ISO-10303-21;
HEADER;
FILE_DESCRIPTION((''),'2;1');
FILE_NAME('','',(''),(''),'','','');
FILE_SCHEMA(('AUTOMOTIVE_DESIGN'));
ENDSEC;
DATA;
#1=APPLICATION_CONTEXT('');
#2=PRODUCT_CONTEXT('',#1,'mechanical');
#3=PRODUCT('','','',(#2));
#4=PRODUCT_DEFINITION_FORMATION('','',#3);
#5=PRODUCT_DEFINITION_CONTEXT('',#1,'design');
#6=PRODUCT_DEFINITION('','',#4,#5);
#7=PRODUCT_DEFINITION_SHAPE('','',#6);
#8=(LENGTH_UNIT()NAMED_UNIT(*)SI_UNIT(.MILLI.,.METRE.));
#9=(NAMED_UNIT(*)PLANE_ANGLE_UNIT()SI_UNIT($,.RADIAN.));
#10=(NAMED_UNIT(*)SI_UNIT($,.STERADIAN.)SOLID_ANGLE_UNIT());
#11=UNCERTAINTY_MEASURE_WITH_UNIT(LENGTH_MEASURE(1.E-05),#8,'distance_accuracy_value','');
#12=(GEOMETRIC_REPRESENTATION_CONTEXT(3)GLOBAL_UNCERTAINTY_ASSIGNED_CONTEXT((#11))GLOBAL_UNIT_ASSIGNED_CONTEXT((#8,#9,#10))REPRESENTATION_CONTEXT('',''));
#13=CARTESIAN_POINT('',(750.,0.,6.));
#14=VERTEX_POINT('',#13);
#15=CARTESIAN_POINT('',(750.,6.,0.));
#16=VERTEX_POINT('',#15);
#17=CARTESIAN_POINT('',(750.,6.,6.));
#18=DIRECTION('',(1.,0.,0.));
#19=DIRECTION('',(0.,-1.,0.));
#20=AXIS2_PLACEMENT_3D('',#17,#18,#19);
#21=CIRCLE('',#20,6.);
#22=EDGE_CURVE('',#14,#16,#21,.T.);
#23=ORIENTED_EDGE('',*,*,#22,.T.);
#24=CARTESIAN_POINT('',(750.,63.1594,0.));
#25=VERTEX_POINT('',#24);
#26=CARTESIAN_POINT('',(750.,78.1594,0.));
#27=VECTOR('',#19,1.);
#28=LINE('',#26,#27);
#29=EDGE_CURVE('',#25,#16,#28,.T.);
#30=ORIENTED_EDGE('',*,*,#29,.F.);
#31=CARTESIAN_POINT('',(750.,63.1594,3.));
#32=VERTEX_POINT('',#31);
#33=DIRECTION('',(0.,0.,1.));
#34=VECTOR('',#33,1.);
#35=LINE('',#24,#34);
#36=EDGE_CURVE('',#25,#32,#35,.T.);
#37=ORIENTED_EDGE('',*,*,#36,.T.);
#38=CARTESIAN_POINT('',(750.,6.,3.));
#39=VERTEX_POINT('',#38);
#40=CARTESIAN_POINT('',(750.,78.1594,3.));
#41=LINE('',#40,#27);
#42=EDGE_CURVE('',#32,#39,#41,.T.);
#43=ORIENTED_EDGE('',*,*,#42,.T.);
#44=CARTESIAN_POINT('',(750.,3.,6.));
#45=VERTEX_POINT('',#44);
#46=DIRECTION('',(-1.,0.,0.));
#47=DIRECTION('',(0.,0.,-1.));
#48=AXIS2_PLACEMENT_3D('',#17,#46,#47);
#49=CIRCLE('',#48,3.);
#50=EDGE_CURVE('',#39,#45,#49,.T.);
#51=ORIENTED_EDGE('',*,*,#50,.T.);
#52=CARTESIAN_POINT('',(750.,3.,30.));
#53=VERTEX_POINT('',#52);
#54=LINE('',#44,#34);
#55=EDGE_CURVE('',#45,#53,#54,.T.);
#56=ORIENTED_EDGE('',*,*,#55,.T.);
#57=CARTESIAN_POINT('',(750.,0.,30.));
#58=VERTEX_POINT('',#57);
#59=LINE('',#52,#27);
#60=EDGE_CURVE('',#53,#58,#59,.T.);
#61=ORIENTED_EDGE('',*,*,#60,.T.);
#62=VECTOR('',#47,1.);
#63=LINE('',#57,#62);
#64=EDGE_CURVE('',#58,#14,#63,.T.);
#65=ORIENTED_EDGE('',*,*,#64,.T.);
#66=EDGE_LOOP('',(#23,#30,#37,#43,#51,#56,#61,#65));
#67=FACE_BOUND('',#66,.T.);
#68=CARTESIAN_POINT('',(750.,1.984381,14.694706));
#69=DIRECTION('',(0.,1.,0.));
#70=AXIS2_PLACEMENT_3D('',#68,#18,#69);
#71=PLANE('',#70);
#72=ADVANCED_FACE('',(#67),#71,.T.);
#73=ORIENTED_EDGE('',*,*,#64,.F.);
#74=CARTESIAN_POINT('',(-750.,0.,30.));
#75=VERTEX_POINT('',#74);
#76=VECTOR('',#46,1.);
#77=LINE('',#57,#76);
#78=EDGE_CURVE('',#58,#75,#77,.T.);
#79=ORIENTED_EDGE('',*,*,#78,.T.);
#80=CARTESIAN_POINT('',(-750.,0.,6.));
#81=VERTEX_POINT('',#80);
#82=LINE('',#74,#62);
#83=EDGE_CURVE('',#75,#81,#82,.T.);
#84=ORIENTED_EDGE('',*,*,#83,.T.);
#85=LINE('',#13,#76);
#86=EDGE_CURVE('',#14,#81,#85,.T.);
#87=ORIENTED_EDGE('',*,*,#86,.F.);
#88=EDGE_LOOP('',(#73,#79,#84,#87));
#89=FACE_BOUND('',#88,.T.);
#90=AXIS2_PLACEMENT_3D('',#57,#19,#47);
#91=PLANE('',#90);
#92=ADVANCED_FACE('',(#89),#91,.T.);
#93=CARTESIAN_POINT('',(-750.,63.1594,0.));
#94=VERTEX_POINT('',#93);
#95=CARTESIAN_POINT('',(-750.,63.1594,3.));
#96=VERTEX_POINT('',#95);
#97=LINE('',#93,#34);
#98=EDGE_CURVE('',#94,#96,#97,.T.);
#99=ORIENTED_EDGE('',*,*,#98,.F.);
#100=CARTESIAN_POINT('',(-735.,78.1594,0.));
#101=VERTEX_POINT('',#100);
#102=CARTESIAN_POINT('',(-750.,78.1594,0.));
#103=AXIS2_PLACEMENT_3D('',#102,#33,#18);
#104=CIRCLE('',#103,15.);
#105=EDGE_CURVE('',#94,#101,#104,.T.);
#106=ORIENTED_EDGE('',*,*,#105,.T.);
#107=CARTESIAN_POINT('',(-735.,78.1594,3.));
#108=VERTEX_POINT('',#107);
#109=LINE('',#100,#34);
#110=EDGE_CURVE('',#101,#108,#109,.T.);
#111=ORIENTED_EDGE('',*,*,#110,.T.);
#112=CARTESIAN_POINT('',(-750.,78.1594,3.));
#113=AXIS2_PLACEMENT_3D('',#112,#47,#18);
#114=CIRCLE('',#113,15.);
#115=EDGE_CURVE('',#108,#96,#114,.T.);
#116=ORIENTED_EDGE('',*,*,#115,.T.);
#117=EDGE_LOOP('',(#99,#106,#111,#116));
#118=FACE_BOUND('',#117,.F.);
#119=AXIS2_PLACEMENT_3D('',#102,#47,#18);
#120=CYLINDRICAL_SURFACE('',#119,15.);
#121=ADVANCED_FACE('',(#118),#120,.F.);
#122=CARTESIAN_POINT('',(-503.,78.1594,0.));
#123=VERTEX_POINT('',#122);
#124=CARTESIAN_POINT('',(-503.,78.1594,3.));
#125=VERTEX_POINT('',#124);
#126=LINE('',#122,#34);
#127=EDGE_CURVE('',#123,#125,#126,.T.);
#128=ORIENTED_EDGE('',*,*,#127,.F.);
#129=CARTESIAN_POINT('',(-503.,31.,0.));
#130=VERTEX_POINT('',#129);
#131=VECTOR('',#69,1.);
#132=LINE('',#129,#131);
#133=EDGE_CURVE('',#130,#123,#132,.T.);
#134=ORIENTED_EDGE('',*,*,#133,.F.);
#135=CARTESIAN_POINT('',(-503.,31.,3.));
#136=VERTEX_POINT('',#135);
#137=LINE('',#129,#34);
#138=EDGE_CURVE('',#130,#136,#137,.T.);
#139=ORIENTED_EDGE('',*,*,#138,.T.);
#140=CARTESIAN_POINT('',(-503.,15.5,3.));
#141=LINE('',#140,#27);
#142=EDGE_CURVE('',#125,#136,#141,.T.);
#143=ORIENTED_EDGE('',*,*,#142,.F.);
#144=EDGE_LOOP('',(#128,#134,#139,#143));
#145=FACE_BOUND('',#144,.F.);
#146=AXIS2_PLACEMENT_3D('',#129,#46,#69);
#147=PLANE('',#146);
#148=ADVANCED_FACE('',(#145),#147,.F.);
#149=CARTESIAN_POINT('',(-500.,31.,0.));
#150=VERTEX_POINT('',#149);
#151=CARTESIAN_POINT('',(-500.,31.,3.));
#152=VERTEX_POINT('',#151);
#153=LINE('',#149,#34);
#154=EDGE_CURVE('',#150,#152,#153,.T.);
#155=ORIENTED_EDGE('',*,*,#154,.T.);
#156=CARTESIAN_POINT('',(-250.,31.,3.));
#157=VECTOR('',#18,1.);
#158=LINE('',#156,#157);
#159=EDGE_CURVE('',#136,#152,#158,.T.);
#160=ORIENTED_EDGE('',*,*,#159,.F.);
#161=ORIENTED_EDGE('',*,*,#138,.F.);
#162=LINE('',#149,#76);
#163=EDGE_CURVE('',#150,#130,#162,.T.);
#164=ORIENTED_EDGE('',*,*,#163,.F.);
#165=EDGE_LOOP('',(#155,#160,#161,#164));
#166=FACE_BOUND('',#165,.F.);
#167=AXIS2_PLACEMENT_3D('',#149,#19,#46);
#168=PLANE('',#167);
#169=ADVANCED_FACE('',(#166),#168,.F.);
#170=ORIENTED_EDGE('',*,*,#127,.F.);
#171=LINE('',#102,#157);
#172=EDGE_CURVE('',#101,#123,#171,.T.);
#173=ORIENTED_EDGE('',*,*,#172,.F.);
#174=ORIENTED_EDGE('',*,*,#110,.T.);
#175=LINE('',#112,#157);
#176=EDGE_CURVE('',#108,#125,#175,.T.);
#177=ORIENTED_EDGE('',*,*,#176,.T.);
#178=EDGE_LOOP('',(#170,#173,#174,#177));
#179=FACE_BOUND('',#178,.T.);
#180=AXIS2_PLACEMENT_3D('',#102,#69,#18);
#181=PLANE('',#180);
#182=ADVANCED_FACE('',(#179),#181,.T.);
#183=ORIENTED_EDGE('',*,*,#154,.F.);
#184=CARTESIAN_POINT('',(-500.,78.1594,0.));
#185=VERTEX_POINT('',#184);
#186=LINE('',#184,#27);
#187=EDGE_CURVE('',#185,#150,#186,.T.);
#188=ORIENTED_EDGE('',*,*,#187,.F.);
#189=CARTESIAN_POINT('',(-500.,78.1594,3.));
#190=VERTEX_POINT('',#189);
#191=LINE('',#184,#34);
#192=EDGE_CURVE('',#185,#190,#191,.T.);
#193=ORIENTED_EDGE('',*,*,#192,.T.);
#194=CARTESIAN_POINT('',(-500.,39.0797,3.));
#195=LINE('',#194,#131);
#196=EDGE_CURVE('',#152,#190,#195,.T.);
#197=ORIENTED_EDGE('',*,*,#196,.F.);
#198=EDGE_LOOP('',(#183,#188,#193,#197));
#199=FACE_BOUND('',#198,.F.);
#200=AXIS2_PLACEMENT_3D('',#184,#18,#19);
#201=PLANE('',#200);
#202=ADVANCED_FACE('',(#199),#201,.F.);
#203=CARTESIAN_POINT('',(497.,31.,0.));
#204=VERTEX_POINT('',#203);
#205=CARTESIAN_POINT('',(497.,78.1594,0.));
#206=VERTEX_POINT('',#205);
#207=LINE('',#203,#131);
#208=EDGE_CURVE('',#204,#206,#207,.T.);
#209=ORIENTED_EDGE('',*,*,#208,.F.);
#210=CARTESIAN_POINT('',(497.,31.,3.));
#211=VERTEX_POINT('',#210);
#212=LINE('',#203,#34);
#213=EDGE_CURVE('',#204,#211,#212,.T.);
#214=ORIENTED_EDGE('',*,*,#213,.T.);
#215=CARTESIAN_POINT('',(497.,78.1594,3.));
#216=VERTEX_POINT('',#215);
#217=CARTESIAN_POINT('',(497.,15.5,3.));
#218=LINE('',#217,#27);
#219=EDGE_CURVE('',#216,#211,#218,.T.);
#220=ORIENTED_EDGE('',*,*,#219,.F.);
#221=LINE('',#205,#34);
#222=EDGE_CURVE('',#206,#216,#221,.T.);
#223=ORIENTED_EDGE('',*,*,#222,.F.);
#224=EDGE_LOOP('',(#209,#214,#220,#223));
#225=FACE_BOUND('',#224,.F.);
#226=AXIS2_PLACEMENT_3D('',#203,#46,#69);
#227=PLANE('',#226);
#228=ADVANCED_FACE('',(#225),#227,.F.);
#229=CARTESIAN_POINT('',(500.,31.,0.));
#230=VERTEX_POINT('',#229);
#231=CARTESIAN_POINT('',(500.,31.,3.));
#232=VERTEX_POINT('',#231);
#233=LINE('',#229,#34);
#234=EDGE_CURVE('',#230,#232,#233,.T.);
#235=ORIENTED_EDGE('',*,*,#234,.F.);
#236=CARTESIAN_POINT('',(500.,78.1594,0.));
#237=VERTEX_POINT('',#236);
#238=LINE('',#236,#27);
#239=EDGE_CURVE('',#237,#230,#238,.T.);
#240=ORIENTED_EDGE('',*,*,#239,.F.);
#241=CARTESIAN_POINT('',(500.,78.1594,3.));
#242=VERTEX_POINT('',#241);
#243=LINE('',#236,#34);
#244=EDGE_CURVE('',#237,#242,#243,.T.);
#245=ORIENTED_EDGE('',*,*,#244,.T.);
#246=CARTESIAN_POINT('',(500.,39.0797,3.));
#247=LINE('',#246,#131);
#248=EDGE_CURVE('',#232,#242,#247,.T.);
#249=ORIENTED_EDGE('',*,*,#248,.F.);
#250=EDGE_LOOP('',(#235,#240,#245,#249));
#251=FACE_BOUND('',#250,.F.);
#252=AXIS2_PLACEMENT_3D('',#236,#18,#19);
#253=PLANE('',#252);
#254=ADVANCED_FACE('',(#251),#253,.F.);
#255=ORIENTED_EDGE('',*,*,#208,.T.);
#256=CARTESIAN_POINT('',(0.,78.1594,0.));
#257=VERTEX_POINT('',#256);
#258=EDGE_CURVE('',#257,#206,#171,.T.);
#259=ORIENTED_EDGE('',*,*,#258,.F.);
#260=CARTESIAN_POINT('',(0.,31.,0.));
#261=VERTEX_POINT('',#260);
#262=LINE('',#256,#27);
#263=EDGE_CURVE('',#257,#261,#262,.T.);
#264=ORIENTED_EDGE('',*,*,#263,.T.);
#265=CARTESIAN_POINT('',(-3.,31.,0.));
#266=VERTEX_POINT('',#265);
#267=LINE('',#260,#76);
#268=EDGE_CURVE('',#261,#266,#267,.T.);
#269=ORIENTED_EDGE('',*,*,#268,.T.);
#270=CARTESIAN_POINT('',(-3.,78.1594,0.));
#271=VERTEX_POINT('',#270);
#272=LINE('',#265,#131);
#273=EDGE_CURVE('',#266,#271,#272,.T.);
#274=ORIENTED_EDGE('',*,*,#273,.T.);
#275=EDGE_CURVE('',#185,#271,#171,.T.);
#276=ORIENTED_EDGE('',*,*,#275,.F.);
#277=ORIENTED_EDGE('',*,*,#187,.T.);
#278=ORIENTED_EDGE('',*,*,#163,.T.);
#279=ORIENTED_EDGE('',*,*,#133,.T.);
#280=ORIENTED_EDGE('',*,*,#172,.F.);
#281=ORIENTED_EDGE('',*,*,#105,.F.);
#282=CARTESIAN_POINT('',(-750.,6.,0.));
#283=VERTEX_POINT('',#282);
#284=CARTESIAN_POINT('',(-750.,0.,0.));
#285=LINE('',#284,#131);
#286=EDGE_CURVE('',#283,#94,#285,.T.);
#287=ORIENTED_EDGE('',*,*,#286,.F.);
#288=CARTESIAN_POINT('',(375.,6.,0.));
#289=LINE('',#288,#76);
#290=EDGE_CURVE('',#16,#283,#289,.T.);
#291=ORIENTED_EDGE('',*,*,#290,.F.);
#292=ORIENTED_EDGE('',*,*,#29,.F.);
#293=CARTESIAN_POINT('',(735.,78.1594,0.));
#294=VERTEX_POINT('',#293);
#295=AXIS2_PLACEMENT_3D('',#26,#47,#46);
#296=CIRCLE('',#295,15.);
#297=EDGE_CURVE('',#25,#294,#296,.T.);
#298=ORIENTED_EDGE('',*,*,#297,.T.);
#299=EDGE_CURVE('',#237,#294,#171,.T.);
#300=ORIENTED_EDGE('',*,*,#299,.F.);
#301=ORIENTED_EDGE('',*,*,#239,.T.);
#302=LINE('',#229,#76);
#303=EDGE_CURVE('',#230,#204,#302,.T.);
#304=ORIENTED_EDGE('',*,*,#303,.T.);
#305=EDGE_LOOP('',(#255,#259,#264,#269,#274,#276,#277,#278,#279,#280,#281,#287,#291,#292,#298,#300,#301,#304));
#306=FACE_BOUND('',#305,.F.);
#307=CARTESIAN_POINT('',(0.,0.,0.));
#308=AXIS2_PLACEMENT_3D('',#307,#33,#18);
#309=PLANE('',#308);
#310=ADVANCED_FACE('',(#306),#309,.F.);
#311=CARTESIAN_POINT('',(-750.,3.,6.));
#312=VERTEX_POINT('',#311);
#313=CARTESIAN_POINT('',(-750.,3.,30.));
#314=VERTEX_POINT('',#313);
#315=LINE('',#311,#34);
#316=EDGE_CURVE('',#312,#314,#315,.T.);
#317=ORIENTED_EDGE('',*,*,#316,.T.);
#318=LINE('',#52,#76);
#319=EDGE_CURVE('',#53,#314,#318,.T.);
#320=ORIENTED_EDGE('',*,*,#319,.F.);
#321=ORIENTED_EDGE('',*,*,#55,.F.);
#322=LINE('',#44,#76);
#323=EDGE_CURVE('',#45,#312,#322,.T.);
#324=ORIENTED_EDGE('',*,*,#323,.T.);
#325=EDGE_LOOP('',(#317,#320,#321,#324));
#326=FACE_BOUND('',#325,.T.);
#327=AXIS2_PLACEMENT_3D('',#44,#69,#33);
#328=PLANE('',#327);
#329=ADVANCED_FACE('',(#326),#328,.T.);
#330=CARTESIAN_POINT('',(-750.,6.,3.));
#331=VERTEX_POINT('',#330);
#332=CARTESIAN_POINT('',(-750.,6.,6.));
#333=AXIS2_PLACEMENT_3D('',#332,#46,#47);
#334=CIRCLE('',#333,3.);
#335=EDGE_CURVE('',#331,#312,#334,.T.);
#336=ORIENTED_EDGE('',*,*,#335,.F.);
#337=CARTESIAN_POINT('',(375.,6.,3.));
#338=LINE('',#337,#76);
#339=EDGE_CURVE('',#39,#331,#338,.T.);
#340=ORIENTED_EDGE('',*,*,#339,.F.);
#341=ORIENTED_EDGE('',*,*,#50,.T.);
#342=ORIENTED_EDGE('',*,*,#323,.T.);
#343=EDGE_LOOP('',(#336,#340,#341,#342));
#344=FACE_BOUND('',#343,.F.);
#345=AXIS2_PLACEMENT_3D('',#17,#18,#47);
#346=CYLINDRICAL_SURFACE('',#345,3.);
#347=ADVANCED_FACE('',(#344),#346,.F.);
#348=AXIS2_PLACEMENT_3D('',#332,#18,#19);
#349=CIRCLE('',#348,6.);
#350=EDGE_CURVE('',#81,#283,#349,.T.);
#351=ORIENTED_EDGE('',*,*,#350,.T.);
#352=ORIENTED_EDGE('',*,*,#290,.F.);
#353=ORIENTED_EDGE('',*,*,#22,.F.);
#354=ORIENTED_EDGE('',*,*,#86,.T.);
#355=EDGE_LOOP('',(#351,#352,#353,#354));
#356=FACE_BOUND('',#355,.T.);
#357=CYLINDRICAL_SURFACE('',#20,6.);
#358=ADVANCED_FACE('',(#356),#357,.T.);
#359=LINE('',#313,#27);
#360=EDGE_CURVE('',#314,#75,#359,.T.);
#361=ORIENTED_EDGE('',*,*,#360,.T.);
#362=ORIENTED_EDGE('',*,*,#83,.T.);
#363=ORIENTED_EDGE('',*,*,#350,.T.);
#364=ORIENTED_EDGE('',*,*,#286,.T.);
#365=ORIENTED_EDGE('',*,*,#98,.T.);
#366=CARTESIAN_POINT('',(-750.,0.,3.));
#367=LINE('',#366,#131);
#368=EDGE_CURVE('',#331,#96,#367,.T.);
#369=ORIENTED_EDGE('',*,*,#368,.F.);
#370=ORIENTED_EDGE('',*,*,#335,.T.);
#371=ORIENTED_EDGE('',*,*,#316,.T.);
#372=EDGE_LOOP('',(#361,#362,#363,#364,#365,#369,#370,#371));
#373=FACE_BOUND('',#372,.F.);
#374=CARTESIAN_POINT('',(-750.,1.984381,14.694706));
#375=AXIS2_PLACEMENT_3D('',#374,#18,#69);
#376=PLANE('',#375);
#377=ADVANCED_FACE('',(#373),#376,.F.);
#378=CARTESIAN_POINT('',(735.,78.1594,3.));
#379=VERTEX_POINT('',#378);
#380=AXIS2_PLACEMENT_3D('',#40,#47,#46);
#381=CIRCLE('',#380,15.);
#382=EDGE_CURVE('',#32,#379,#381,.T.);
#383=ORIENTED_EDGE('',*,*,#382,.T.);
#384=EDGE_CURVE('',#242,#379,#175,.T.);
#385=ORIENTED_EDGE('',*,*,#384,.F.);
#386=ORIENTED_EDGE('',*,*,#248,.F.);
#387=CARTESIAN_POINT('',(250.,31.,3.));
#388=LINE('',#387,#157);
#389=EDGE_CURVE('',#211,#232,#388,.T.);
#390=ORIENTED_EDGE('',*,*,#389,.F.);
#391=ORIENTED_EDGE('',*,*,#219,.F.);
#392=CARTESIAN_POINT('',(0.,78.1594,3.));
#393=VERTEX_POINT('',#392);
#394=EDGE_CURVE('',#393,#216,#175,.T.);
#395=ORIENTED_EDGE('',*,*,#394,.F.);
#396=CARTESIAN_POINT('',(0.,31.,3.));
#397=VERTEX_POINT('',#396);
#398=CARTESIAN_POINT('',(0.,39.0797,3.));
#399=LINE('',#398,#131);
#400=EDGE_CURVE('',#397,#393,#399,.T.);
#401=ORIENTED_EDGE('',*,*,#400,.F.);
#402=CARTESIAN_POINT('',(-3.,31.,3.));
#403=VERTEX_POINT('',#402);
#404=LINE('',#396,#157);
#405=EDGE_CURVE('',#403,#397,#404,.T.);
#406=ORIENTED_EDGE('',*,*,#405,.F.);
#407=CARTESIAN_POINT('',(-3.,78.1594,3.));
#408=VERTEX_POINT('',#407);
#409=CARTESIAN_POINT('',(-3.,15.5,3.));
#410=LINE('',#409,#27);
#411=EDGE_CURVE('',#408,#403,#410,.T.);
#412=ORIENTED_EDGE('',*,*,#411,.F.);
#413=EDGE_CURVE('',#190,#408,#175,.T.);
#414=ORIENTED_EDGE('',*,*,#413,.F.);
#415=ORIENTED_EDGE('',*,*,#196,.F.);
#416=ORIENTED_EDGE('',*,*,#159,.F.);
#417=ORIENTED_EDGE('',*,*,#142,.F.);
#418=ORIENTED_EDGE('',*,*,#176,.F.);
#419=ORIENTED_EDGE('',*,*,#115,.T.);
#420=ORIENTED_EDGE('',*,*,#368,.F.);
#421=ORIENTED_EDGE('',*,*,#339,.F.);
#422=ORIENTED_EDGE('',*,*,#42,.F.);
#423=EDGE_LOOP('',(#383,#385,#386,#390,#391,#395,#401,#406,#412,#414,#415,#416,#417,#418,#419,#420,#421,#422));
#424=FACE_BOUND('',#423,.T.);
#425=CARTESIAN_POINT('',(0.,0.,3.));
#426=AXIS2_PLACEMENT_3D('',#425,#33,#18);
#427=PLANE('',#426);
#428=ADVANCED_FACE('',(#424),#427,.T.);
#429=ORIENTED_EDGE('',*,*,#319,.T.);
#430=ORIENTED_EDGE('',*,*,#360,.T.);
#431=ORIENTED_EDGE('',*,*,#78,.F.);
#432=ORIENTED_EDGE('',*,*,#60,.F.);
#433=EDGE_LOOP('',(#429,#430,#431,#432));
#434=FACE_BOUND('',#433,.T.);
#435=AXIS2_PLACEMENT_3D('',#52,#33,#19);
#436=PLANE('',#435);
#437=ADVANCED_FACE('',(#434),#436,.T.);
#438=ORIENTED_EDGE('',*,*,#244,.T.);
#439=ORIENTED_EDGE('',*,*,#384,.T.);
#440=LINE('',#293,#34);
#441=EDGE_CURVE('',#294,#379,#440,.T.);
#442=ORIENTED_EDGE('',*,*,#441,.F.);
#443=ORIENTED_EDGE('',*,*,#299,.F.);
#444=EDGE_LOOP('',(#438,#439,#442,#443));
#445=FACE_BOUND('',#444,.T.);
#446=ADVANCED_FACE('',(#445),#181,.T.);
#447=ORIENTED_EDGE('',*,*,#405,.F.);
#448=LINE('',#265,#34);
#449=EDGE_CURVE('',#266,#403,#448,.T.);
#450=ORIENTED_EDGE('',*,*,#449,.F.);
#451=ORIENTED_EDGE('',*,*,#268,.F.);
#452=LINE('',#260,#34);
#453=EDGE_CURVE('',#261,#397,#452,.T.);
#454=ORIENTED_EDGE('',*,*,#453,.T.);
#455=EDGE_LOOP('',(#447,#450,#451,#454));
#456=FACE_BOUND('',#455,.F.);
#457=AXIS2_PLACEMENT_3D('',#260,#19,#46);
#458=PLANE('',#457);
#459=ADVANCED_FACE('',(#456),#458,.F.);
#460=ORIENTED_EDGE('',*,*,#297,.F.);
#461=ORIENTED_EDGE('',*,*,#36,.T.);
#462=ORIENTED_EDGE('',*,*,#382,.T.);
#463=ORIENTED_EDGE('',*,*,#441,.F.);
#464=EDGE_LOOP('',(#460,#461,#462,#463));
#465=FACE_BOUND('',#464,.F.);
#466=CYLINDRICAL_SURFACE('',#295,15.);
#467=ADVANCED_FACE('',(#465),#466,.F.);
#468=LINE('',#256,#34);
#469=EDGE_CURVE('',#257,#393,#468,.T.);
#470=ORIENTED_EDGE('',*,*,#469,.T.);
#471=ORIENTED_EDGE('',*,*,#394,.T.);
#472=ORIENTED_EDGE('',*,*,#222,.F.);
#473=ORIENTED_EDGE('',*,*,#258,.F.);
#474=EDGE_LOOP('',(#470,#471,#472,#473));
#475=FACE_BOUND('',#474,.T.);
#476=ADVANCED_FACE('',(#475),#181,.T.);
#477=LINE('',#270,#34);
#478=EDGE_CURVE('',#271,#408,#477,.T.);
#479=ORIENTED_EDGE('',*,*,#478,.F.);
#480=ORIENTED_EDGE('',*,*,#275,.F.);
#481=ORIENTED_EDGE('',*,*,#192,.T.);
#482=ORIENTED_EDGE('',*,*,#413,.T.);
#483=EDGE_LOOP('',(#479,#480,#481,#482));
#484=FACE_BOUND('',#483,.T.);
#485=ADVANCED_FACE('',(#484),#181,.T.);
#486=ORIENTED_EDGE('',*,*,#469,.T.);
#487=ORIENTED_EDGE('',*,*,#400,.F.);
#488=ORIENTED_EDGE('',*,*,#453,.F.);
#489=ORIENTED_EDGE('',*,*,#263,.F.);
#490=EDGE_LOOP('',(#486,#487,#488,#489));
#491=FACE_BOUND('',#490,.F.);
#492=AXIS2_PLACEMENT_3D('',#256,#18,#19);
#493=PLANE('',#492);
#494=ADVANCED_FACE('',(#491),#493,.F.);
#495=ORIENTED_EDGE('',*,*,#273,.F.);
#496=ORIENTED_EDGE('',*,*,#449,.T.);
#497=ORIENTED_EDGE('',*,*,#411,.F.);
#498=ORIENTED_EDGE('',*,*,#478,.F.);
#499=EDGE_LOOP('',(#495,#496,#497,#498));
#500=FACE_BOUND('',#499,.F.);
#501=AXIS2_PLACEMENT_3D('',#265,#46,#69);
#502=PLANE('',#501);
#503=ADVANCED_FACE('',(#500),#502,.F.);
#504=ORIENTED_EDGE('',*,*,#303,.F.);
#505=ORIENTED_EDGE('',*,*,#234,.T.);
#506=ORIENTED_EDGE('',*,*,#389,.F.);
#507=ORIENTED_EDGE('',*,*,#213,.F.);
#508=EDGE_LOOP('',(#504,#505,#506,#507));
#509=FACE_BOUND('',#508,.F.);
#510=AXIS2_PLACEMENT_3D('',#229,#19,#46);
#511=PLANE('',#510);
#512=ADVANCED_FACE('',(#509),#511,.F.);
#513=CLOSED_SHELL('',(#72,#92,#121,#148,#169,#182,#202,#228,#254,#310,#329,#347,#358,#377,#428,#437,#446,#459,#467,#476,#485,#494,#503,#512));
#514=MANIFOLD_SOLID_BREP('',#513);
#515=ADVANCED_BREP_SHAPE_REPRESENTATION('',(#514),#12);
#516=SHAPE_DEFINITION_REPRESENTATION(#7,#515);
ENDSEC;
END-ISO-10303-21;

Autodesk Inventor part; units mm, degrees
ref_plane "YZ Plane" through (0, 0, 0) normal (1, 0, 0) x (0, 1, 0)
ref_plane "XZ Plane" through (0, 0, 0) normal (0, 1, 0) x (-1, 0, 0)
ref_plane "XY Plane" through (0, 0, 0) normal (0, 0, 1) x (1, 0, 0)
sketch "Sketch1" plane through (0, 0, 0) normal (0, 0, 1) x (1, 0, 0)
  line L0 (-750, 78.1594) -> (750, 78.1594)
  line L1 (750, 78.1594) -> (750, 0)
  line L2 (750, 0) -> (-750, 0)
  line L3 (-750, 0) -> (-750, 78.1594)
  point P0 (0, 0)
  point P1 (0, 0)
  dimension "d0" = 1500
  dimension "d1" = 78.1594
extrude "Plate1" add sketch "Sketch1" along normal blind 3
sketch "Sketch2" plane through (750, 3, 0) normal (0, -1, 0) x (1, 0, 0)
  line L0 (-1500, 0) -> (0, 0)
  line L1 (0, 0) -> (0, 30)
  line L2 (0, 30) -> (-1500, 30)
  line L3 (-1500, 30) -> (-1500, 0)
edge flange "Flange1" height 30 angle 90 thickness 3 bend radius 3 thickness toward (0, -1, 0) relief tear relief width 3 relief depth 1.5 edges at (0, 0, 3) wall of the first edge with corners at (-750, 3, 0) (750, 3, 0) (750, 3, 30) (-750, 3, 30)
bend "Bend1"
corner "Corner1"
sketch "Sketch5" plane through (0, 0, 0) normal (0, 0, -1) x (-1, 0, 0)
  line L0 (750, 78.1594) -> (-750, 78.1594) projected
  line L1 (500, 78.1594) -> (500, 31)
  line L2 (500, 31) -> (503, 31)
  line L3 (503, 31) -> (503, 78.1594)
  line L4 (750, 0) -> (-750, 0) projected
  point P0 (0, 0)
  dimension "d18" = 3
  dimension "d19" = 247
  dimension "d20" = 31
extrude "Extrusion1" cut sketch "Sketch5" against normal through all
pattern_linear "Rectangular Pattern1" count 3 spacing 500 along (1, 0, 0) of "Extrusion1"
sketch "Sketch6" plane through (0, 0, 0) normal (0, 0, -1) x (-1, 0, 0)
  line L0 (-750, 78.1594) -> (-750, 6) projected
  circle A0 centre (-750, 78.1594) radius 15
  line L1 (-750, 78.1594) -> (-500, 78.1594) projected
  point P0 (0, 0)
  point P1 (-735, 78.1594)
  point P2 (-750, 63.1594)
  dimension "d24" = 30
extrude "Extrusion2" cut sketch "Sketch6" against normal through all contours L1 A0 L0 picked at (-740.1254, 77.0468)
mirror "Mirror1" about plane through (0, 0, 0) normal (1, 0, 0) of "Extrusion2"
equation "\"d1\" = Стрингер_6"
equation "\"d18\" = Thickness"
equation "\"d2\" = Thickness"
equation "\"d3\" = BendReliefWidth"
equation "\"d4\" = BendReliefDepth"
equation "\"d5\" = MinimumRemnant"
equation "\"d6\" = TransitionRadius"
equation "\"d9\" = BendRadius"
equation "\"d10\" = CornerReliefSize"
equation "\"d11\" = GapSize"
equation "\"d12\" = JacobiRadiusSize"
equation "\"BendRadius\" = Thickness"
equation "\"BendReliefWidth\" = Thickness"
equation "\"BendReliefDepth\" = 0.5 * Thickness"
equation "\"CornerReliefSize\" = 4 * Thickness"
equation "\"MinimumRemnant\" = 2 * Thickness"
equation "\"TransitionRadius\" = BendRadius"
equation "\"JacobiRadiusSize\" = BendRadius"
equation "\"GapSize\" = Thickness"
equation "\"Стрингер_6\" = 78.159354"
equation "\"Thickness\" = 3"
properties part number "МОО 056 стрингер борт 61"
